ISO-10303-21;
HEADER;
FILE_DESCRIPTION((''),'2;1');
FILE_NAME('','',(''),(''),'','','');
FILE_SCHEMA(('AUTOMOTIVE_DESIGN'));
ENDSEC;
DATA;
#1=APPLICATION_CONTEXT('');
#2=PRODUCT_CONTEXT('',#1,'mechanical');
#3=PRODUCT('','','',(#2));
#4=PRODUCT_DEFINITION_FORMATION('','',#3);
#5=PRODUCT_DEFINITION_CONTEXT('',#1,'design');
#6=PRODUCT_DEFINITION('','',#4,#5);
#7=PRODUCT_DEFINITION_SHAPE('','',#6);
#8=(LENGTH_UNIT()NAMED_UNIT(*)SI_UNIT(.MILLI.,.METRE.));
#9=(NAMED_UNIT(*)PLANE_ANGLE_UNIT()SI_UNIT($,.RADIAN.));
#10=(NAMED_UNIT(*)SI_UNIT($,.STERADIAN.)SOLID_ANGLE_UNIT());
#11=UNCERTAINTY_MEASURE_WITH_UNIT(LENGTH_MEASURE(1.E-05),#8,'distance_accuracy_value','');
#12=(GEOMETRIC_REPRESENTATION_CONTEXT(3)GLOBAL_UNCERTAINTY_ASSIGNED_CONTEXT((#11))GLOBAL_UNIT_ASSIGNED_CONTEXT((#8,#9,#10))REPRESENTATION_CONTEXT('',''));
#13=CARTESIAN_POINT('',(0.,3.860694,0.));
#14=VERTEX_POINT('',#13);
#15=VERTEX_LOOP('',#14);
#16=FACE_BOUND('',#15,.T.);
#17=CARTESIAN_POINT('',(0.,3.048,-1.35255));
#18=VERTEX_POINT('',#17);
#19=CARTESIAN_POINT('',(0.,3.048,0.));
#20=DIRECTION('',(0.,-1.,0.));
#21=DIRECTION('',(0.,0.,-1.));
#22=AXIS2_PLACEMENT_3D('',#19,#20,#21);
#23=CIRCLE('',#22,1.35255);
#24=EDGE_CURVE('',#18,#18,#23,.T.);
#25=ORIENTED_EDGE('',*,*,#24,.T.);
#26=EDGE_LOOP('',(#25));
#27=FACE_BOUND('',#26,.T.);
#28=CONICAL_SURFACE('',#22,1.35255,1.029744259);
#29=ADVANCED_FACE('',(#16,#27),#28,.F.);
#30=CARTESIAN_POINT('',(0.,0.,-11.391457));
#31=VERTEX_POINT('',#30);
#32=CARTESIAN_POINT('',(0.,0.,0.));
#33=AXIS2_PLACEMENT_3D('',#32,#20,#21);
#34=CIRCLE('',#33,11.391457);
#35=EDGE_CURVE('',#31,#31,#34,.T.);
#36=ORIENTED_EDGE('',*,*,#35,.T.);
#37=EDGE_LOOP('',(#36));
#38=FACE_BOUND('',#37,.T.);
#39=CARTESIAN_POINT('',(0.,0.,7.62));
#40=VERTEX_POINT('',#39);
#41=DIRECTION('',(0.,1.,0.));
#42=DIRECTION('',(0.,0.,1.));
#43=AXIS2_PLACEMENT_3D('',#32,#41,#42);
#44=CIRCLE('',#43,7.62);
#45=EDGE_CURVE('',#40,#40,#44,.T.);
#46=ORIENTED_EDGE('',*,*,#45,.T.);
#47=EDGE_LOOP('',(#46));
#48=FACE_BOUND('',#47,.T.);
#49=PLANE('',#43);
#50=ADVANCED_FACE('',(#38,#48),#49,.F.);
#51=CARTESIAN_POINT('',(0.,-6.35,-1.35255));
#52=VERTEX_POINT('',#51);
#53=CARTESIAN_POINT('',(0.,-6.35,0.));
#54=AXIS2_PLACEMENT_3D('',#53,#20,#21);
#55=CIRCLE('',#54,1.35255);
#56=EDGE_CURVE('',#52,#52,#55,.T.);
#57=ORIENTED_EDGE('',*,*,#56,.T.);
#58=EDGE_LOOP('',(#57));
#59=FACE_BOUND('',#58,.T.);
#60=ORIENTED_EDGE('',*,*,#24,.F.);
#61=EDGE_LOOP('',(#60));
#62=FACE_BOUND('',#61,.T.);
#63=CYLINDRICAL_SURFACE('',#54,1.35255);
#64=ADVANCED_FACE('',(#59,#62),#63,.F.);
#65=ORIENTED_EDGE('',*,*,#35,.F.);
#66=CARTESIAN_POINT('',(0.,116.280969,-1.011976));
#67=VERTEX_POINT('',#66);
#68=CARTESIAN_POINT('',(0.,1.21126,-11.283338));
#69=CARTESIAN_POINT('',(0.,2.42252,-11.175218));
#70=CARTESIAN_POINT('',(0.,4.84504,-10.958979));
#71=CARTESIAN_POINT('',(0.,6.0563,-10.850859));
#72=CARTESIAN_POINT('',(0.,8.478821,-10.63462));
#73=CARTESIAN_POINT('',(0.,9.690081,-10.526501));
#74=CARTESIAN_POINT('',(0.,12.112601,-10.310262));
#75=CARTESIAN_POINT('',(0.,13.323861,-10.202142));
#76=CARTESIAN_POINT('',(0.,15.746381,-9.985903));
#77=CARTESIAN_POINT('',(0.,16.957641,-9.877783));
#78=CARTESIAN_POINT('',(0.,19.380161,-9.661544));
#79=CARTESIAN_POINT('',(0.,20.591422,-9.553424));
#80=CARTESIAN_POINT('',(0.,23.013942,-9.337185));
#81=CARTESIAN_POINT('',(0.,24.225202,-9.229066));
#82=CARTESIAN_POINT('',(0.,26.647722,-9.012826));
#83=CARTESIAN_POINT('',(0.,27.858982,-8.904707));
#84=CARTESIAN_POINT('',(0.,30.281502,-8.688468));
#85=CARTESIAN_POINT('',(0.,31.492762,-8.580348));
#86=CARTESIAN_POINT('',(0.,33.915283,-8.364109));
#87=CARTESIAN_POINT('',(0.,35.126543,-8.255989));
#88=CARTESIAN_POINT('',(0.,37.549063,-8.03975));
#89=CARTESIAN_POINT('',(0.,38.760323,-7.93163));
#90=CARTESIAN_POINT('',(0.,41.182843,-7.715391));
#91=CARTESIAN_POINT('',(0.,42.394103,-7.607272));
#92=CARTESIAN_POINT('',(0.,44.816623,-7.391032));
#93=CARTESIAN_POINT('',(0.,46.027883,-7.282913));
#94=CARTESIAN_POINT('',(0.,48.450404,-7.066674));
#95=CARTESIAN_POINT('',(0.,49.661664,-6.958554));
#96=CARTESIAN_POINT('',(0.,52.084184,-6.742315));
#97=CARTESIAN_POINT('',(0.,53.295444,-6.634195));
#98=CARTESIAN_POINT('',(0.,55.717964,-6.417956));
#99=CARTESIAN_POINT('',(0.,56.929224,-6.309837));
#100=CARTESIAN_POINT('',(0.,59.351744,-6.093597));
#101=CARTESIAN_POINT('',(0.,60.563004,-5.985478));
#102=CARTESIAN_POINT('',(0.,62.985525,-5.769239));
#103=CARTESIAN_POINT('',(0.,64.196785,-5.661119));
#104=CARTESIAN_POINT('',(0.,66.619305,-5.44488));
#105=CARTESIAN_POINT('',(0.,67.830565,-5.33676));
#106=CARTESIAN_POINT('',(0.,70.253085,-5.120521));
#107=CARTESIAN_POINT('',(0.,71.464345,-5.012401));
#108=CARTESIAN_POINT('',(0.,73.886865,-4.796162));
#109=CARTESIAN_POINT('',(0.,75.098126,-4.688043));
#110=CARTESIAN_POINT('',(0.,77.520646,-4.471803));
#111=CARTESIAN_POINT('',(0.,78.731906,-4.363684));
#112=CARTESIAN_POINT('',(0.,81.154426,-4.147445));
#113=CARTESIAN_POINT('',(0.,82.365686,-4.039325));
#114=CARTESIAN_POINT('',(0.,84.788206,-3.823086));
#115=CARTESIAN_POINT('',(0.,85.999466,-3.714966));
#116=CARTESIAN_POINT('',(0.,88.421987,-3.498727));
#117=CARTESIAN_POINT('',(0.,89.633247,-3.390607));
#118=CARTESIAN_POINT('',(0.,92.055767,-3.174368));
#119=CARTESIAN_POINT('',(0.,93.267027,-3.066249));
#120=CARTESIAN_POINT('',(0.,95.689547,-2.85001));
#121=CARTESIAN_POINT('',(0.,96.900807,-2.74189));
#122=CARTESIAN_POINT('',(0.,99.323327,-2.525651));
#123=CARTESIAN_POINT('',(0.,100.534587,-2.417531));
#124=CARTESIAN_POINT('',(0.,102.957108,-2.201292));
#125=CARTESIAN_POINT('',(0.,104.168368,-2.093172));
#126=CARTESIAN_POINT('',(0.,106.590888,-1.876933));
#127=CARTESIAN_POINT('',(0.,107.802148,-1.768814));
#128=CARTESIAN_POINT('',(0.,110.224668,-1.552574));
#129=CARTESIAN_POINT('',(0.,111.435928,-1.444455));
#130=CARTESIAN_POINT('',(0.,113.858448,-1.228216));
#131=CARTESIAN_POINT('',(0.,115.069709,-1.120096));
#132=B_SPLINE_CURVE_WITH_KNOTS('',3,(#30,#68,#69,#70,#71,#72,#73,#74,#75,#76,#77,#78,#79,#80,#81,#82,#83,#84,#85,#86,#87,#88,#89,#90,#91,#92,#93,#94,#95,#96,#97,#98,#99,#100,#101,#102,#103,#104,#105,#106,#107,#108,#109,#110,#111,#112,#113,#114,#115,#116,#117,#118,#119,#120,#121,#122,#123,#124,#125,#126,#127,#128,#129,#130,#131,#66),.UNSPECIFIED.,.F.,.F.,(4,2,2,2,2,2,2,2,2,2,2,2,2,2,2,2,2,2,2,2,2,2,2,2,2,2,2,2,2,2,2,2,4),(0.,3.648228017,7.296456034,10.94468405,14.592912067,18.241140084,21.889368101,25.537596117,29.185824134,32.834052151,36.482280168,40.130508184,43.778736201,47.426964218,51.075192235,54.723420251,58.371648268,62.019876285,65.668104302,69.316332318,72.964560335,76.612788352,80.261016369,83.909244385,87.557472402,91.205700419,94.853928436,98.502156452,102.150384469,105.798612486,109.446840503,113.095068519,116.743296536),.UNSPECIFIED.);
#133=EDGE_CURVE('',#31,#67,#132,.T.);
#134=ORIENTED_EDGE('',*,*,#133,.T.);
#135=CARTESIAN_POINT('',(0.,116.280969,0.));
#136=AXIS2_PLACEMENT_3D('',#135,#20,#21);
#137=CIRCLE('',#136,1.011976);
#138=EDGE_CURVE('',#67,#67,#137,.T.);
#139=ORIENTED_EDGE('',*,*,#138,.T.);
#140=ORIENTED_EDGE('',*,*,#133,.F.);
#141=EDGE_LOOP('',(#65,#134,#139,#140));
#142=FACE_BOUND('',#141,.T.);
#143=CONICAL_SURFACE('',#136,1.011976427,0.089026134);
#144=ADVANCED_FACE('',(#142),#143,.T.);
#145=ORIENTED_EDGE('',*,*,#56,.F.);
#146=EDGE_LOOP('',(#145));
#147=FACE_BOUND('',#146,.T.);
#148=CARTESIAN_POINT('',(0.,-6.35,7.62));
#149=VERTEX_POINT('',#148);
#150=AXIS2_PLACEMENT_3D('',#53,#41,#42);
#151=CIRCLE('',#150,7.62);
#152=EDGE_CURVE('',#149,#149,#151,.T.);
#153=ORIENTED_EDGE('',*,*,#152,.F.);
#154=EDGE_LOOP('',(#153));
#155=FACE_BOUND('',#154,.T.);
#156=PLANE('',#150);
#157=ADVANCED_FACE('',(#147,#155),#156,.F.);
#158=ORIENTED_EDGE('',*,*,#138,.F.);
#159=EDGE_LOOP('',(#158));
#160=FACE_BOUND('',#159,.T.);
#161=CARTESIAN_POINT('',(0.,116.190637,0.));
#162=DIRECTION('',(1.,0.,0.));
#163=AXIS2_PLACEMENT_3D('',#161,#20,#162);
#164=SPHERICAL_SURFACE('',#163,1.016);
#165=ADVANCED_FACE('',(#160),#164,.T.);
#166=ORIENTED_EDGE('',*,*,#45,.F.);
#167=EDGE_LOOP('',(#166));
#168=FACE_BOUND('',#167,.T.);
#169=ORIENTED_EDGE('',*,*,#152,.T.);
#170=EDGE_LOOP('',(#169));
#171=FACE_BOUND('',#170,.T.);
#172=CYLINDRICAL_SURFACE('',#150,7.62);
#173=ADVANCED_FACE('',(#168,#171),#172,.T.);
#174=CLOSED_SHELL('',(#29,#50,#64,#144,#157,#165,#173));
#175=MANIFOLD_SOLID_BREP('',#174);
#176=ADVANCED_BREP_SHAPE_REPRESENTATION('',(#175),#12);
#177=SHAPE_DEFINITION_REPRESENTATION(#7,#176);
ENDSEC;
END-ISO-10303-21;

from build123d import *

# Parameters (mm, degrees)
SKETCH1_R                 = 7.62
BOSS_EXTRUDE1_DEPTH       = 6.35
F_6_32_TAPPED_HOLE1_D     = 2.7051
F_6_32_TAPPED_HOLE1_DEPTH = 9.398
F_6_32_TAPPED_HOLE1_TIP   = 0.81269403


with BuildPart() as part:
    # Sketch1 → Boss-Extrude1 (new body)
    with BuildSketch(Plane(origin=(0, 0, 0), x_dir=(1, 0, 0), z_dir=(0, 1, 0))):
        Circle(SKETCH1_R)
    extrude(amount=-BOSS_EXTRUDE1_DEPTH)

    # Sketch3 → Revolve1 (revolve)
    with BuildSketch(Plane.XY):
        with BuildLine():
            Line((0, 0), (11.39145745, 0))
            Line((11.39145745, 0), (1.011976427, 116.280968605))
            ThreePointArc((1.011976427, 116.280968605), (0.685740324, 116.940314889), (0, 117.206637485))
            Line((0, 117.206637485), (0, 0))
        make_face()
    revolve(axis=Axis((0, 0, 0), (0, 1, 0)))

    # #6-32 Tapped Hole1
    with Locations(Plane.XZ.offset(6.35)):
        with Locations((0, 0)):
            Hole(F_6_32_TAPPED_HOLE1_D / 2, depth=F_6_32_TAPPED_HOLE1_DEPTH)
            with Locations((0, 0, -(F_6_32_TAPPED_HOLE1_DEPTH + F_6_32_TAPPED_HOLE1_TIP / 2))):  # 118° drill point
                Cone(0, F_6_32_TAPPED_HOLE1_D / 2, F_6_32_TAPPED_HOLE1_TIP, mode=Mode.SUBTRACT)


solid = part.part
